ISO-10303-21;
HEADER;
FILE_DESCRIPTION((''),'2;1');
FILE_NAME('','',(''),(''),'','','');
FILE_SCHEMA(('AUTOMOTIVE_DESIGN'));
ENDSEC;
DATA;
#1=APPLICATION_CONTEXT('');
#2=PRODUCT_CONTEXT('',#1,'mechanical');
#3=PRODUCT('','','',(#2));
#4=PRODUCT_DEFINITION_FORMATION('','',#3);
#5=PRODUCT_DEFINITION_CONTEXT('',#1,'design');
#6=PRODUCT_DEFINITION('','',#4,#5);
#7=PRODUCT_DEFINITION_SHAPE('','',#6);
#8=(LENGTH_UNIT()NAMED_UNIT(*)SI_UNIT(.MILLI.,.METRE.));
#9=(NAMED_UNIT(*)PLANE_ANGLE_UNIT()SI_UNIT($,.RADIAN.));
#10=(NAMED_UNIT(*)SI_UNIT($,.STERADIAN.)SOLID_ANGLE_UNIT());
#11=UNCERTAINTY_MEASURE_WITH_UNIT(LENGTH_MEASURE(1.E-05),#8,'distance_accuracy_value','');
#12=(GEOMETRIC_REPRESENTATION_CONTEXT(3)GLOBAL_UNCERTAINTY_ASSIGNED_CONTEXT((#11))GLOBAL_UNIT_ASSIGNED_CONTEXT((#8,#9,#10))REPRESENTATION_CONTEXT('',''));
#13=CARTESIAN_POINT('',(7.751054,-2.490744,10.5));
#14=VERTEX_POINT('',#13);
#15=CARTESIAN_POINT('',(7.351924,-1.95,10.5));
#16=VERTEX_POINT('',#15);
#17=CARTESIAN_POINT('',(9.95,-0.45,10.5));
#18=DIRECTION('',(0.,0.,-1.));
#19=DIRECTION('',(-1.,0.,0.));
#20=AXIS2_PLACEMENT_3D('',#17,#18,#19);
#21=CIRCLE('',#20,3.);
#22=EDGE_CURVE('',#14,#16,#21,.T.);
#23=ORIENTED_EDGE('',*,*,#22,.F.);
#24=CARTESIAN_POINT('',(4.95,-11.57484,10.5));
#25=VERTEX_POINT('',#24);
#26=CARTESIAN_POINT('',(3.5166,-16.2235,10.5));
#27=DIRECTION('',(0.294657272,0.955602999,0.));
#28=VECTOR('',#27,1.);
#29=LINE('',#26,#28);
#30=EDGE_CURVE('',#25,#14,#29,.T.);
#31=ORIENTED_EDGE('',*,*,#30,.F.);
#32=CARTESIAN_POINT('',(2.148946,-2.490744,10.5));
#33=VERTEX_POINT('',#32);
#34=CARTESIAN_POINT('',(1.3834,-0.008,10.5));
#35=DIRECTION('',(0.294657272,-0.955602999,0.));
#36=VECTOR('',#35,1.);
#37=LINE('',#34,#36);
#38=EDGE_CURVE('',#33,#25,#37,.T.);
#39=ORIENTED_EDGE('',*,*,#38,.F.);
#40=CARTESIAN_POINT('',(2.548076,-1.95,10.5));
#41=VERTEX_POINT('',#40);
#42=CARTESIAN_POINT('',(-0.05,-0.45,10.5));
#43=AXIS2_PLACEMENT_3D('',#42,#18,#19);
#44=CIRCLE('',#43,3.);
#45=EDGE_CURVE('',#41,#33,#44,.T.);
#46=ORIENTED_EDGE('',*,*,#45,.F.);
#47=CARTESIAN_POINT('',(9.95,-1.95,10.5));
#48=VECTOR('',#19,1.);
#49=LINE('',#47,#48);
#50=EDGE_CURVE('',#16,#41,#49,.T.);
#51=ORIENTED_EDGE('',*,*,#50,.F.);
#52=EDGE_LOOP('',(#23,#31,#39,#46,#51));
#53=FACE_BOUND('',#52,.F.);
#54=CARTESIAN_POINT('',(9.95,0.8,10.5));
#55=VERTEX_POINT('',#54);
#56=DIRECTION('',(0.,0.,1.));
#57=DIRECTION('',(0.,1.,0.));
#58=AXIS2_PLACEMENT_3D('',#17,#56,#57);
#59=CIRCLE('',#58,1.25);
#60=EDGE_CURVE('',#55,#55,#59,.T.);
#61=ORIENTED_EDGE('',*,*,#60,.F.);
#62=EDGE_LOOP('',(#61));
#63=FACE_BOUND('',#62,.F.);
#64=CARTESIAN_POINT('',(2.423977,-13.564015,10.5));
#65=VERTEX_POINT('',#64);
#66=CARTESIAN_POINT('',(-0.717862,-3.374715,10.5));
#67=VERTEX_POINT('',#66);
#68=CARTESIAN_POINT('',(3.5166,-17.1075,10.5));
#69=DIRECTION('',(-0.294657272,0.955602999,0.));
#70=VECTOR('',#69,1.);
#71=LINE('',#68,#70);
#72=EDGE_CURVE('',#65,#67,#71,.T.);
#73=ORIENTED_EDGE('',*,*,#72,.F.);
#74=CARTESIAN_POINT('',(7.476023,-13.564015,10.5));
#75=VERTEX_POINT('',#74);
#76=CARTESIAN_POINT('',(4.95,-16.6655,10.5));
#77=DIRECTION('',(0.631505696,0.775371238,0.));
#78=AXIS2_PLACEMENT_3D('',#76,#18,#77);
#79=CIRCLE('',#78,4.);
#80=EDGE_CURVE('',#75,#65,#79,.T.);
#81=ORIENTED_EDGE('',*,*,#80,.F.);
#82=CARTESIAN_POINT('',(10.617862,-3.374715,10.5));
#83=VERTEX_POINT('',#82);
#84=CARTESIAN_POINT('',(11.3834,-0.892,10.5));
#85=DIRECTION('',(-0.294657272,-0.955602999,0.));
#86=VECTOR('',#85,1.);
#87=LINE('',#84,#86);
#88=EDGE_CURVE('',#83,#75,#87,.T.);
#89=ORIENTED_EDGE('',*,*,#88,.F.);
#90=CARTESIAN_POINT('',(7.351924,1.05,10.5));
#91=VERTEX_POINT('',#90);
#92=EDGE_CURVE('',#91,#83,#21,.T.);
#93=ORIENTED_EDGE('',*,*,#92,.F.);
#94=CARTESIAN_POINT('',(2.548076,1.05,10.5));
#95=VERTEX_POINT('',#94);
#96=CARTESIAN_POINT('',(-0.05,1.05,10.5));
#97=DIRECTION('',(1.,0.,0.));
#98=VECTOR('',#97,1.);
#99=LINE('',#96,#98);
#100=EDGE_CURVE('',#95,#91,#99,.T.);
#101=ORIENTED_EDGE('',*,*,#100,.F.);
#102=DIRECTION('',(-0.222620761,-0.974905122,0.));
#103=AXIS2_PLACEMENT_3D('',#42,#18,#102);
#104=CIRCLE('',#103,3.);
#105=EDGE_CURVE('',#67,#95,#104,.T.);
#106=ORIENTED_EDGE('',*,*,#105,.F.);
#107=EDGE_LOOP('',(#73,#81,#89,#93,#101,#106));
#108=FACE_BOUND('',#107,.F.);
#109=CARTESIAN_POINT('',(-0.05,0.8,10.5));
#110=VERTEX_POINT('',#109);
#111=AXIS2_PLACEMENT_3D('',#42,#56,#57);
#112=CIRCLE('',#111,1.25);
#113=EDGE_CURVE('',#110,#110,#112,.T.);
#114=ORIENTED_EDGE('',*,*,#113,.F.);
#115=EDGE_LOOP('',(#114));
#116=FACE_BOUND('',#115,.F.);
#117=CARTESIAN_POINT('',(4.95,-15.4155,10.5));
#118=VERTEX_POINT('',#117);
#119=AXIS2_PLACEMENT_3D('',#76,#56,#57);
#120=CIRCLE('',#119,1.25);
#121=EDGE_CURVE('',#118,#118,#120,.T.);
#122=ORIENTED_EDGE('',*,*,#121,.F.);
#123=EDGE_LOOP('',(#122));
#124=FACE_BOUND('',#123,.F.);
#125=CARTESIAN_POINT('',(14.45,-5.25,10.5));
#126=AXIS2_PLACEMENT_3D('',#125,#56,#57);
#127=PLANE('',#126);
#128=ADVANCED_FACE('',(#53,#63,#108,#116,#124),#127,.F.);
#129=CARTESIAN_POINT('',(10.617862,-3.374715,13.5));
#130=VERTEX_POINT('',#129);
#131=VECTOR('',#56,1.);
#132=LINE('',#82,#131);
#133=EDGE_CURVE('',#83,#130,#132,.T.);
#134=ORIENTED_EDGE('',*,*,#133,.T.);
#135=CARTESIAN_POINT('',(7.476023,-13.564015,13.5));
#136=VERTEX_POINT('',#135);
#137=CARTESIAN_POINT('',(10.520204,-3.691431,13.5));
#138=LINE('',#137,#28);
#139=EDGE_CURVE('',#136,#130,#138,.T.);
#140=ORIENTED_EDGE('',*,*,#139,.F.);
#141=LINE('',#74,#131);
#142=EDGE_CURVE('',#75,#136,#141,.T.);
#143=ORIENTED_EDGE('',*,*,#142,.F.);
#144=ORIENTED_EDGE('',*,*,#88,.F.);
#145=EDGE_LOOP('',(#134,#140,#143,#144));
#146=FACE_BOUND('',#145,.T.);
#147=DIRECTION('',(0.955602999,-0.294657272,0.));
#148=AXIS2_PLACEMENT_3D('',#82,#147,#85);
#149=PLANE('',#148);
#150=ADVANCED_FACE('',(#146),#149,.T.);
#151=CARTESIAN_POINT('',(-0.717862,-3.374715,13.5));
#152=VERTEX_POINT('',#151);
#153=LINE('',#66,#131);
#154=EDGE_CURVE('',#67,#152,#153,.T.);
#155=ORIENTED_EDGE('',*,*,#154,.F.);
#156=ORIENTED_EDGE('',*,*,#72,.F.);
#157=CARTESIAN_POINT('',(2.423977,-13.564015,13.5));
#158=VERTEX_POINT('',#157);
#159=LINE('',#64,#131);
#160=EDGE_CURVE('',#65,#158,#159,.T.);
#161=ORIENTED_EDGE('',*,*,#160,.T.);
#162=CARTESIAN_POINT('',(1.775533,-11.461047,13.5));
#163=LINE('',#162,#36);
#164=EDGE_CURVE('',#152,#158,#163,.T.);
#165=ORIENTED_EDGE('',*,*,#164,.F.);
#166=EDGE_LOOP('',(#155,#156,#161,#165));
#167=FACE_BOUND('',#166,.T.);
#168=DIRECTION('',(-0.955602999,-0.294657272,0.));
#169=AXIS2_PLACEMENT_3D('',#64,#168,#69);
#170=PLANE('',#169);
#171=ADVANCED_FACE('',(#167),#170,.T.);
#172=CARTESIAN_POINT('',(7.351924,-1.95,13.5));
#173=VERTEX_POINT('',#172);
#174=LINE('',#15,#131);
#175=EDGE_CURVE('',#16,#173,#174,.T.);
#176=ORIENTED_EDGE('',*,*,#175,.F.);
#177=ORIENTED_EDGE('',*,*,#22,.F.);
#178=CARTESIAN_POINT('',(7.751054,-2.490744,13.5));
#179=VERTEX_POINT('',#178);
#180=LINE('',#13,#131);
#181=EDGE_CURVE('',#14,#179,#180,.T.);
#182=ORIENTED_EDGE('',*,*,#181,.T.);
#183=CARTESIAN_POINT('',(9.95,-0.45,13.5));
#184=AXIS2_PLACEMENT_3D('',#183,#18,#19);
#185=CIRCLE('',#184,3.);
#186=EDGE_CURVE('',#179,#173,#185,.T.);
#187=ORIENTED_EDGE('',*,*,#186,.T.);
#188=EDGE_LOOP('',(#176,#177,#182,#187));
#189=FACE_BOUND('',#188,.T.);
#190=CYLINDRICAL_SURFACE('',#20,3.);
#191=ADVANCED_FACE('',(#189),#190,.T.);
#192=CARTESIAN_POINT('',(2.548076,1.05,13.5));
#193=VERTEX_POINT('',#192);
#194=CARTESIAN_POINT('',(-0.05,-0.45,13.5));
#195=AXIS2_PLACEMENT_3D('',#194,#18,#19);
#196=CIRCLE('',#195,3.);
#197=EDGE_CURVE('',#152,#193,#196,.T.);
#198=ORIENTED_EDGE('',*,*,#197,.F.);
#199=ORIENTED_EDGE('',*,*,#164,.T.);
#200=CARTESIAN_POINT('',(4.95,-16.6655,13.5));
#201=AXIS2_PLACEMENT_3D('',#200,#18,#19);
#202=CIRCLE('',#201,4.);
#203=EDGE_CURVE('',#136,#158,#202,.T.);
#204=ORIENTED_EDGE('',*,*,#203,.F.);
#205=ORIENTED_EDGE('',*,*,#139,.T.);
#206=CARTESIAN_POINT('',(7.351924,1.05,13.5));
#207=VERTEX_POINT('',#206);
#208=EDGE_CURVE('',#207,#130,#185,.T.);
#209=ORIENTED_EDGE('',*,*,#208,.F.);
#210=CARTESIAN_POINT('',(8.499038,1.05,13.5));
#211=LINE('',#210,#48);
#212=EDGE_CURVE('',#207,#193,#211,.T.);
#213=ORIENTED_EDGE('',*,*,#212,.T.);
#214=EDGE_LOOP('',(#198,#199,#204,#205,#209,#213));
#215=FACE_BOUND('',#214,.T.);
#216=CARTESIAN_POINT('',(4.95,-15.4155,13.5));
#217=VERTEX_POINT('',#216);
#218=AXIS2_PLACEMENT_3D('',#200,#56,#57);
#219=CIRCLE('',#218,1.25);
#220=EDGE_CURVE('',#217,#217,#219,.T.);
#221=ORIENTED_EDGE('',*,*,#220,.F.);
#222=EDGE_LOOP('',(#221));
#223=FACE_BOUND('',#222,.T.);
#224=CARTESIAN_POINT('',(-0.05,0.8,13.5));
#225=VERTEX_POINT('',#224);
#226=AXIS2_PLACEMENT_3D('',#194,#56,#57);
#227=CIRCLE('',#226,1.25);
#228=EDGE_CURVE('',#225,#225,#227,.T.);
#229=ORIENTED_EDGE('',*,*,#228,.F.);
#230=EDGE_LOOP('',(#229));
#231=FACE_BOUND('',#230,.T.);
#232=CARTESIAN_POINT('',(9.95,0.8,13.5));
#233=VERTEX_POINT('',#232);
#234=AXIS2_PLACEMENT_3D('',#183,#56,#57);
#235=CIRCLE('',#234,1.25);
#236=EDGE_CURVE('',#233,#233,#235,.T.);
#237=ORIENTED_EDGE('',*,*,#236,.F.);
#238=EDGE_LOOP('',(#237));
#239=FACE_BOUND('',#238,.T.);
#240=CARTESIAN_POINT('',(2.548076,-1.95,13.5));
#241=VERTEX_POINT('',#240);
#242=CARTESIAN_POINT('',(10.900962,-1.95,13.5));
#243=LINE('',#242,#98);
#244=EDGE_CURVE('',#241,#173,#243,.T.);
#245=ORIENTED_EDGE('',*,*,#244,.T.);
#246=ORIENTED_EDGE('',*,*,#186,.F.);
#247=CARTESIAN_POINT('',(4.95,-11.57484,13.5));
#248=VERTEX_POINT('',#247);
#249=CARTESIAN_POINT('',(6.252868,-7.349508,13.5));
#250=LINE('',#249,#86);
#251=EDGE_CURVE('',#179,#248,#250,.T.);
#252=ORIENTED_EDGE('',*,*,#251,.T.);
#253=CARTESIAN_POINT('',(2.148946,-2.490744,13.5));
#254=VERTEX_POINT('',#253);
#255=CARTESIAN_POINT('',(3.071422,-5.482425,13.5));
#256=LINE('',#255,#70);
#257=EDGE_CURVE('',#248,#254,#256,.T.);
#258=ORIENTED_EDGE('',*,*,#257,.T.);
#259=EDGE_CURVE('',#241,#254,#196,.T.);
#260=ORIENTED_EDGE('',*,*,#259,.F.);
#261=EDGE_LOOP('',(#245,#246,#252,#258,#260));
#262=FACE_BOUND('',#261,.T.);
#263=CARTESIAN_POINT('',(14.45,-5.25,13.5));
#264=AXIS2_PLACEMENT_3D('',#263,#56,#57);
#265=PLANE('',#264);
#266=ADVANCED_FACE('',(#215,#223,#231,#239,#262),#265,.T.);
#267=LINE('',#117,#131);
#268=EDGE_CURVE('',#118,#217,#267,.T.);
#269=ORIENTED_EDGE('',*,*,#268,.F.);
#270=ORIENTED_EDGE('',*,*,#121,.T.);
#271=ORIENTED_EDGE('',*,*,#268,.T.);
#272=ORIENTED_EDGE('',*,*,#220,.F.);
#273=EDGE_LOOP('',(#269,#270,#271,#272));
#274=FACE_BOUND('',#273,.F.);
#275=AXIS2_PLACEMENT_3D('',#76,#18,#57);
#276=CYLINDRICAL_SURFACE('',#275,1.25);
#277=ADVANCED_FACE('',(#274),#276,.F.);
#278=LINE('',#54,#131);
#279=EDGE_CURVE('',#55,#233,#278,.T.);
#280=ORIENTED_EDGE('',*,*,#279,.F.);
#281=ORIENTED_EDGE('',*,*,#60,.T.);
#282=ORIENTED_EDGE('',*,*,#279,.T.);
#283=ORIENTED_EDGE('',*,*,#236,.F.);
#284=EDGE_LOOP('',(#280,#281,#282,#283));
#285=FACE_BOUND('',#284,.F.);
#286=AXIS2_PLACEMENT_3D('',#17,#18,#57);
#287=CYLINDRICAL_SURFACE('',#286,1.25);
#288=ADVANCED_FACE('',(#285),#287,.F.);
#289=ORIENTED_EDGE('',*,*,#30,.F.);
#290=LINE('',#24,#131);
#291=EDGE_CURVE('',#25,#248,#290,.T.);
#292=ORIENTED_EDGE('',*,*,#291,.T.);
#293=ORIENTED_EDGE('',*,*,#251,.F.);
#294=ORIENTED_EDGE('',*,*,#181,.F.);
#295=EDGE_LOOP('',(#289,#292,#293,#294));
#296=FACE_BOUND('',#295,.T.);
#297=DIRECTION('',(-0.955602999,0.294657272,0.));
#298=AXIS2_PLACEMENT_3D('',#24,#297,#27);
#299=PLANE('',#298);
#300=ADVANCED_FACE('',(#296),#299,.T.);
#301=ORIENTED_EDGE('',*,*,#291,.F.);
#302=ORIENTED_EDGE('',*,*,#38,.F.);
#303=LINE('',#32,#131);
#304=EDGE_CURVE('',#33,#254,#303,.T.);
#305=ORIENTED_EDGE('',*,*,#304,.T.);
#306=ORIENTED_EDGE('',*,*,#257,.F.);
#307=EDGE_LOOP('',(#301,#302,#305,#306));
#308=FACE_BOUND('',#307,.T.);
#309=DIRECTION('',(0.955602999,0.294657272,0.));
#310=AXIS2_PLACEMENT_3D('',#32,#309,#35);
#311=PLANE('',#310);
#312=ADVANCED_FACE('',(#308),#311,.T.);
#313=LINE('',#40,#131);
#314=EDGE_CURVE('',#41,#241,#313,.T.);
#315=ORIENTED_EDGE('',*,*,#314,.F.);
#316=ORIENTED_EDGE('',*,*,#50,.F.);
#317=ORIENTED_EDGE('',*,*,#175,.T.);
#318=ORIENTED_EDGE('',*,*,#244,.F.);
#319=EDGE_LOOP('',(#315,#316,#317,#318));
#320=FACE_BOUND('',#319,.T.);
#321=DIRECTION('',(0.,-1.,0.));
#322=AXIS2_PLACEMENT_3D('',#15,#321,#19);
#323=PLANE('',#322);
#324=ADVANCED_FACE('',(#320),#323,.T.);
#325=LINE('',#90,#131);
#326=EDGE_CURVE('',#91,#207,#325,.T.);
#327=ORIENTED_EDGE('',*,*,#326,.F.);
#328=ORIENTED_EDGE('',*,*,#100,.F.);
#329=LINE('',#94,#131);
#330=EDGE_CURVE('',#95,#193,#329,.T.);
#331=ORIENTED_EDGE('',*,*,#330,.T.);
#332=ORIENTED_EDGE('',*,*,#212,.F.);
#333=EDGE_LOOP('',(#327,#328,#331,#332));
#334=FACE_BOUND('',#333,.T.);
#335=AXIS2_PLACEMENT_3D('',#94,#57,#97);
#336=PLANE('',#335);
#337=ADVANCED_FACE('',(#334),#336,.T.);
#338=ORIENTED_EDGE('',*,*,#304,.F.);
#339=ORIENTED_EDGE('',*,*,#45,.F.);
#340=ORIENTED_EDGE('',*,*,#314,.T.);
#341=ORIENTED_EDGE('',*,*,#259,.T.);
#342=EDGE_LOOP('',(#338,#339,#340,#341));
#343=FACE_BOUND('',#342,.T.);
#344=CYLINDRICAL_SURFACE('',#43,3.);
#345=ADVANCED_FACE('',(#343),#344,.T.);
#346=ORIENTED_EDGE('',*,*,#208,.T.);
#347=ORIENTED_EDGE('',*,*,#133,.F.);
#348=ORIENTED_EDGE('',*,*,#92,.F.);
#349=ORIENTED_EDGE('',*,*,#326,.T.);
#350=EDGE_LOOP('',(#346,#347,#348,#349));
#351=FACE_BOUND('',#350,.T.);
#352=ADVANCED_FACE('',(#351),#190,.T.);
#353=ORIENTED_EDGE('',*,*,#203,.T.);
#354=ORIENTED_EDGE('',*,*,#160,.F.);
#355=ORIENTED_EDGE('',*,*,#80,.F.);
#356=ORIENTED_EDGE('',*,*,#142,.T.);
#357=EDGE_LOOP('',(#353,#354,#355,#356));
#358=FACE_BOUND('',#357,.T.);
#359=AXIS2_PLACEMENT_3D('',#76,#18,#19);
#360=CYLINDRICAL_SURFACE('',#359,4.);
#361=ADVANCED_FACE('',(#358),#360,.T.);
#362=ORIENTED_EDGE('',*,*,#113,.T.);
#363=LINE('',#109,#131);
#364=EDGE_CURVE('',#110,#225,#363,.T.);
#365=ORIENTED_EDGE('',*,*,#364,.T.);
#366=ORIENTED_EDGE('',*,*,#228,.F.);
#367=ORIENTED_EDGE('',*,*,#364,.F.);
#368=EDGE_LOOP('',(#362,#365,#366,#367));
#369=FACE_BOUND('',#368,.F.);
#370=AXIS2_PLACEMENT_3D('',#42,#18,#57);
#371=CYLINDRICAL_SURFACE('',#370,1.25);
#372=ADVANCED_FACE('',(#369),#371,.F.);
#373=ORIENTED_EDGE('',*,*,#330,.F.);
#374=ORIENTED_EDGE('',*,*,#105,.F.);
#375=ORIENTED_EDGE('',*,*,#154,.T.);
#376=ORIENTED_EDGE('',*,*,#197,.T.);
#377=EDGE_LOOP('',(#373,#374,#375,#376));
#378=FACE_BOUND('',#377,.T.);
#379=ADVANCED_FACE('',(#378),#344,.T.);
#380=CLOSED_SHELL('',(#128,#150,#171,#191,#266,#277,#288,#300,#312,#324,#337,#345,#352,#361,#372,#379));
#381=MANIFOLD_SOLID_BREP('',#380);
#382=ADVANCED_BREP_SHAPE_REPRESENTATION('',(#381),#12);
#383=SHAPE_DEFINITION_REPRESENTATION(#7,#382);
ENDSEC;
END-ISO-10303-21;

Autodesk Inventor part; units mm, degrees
ref_plane "YZ Plane" through (0, 0, 0) normal (1, 0, 0) x (0, 1, 0)
ref_plane "XZ Plane" through (0, 0, 0) normal (0, 1, 0) x (-1, 0, 0)
ref_plane "作業平面1" through (14.45, -5.25, 10.5) normal (0, 0, 1) x (0, 1, 0)
sketch "スケッチ1" plane through (14.45, -5.25, 10.5) normal (0, 0, 1) x (0, 1, 0)
  circle A0 centre (4.8, 4.5) radius 1.25
  circle A1 centre (4.8, 14.5) radius 1.25
  circle A2 centre (4.5, 225.5) radius 1.5 projected
  circle A3 centre (4.5, 201.5) radius 1.5 projected
  line L0 (9, 0) -> (0, 0) projected
  line L1 (9, 0) -> (9, 230) projected
  line L2 (0, 230) -> (9, 230) projected
  line L3 (0, 0) -> (0, 230) projected
  circle A4 centre (-11.4155, 9.5) radius 1.25
  circle A5 centre (4.8, 14.5) radius 4.6
  circle A6 centre (4.8, 4.5) radius 4.6
  circle A7 centre (-11.4155, 9.5) radius 4.25
  line L4 (9.4, 19.1) -> (-15.6655, 19.1)
  line L5 (-15.6655, 19.1) -> (-15.6655, -0.1)
  line L6 (-15.6655, -0.1) -> (9.4, -0.1)
  line L7 (9.4, -0.1) -> (9.4, 19.1)
  point P0 (5.25, 14.45)
  dimension "d0" = 2.5
  dimension "d1" = 9.2
  dimension "d2" = 9.2
  dimension "d3" = 8.5
  dimension "d14" = 2.5
extrude "押し出し1" add sketch "スケッチ1" along normal blind 3 contours L1 A6 L7 L6 L0 | L0 A6 L1 | A6 L0 | L0 A6 L1 | L1 A6 | A7 | A6 L6 L5 L4 L3 L0 | L0 L3 L4 A5 L1 A6 | L1 A5 L7 A6 | A5 L1 | L1 A5 | A5 L1 L4 L7 | A5 L4 L1
sketch "スケッチ2" plane through (14.45, -5.25, 10.5) normal (0, 0, -1) x (-1, 0, 0)
  circle A0 centre (4.5, 4.8) radius 1.25 projected
  circle A1 centre (14.5, 4.8) radius 1.25 projected
  circle A2 centre (9.5, -11.4155) radius 1.25 projected
  line L0 (-0.1, -15.6655) -> (-0.1, 9.4) projected
  line L1 (-0.1, 9.4) -> (19.1, 9.4) projected
  line L2 (19.1, 9.4) -> (19.1, -15.6655) projected
  line L3 (19.1, -15.6655) -> (-0.1, -15.6655) projected
  circle A3 centre (4.5, 4.8) radius 3
  circle A4 centre (14.5, 4.8) radius 3
  circle A5 centre (9.5, -11.4155) radius 4
  line L4 (4.5, 4.8) -> (9.5, -11.4155) construction
  line L5 (3.0666, 4.358) -> (8.0666, -11.8575)
  line L6 (10.9334, -10.9735) -> (5.9334, 5.242)
  arc A6 (5.9334, 5.242) -> (3.0666, 4.358) centre (4.5, 4.8) ccw
  arc A7 (8.0666, -11.8575) -> (10.9334, -10.9735) centre (9.5, -11.4155) ccw
  line L7 (9.5, -11.4155) -> (14.5, 4.8) construction
  line L8 (10.9334, -11.8575) -> (15.9334, 4.358)
  line L9 (13.0666, 5.242) -> (8.0666, -10.9735)
  arc A8 (8.0666, -10.9735) -> (10.9334, -11.8575) centre (9.5, -11.4155) ccw
  arc A9 (15.9334, 4.358) -> (13.0666, 5.242) centre (14.5, 4.8) ccw
  line L10 (4.5, 4.8) -> (14.5, 4.8) construction
  line L11 (4.5, 3.3) -> (14.5, 3.3)
  line L12 (14.5, 6.3) -> (4.5, 6.3)
  arc A10 (4.5, 6.3) -> (4.5, 3.3) centre (4.5, 4.8) ccw
  arc A11 (14.5, 3.3) -> (14.5, 6.3) centre (14.5, 4.8) ccw
  point P0 (14.45, 5.25)
  point P1 (7, -3.3077)
  point P2 (12, -3.3077)
  point P3 (9.5, 4.8)
  dimension "d6" = 6
  dimension "d7" = 6
  dimension "d8" = 8
  dimension "d9" = 3
  dimension "d10" = 3
  dimension "d11" = 3
extrude "押し出し2" cut sketch "スケッチ2" against normal blind 10 contours A0 | A1 | A2 | A3 L11 L6 A6 L12 | A3 L12 A4 L11 | L12 A6 L5 A3 | A3 L6 L11 | L5 A10 L11 L6 A3 | A3 L6 L9 A5 L5 | L12 A9 L9 L11 A4 | A4 L8 A9 L12 | A6 L6 L11 A10 | L11 L9 A4 | L5 A7 L8 A5 | A5 L9 A8 L5 | A9 A11 L11 L9 | L9 A4 L8 A5 L6 | L6 A5 L9 | L9 L11 A11 L8 A4 | A5 L6 A7 A8 L9 | A5 L8 A7 L6 keep common part
properties part number "従動節固定"
